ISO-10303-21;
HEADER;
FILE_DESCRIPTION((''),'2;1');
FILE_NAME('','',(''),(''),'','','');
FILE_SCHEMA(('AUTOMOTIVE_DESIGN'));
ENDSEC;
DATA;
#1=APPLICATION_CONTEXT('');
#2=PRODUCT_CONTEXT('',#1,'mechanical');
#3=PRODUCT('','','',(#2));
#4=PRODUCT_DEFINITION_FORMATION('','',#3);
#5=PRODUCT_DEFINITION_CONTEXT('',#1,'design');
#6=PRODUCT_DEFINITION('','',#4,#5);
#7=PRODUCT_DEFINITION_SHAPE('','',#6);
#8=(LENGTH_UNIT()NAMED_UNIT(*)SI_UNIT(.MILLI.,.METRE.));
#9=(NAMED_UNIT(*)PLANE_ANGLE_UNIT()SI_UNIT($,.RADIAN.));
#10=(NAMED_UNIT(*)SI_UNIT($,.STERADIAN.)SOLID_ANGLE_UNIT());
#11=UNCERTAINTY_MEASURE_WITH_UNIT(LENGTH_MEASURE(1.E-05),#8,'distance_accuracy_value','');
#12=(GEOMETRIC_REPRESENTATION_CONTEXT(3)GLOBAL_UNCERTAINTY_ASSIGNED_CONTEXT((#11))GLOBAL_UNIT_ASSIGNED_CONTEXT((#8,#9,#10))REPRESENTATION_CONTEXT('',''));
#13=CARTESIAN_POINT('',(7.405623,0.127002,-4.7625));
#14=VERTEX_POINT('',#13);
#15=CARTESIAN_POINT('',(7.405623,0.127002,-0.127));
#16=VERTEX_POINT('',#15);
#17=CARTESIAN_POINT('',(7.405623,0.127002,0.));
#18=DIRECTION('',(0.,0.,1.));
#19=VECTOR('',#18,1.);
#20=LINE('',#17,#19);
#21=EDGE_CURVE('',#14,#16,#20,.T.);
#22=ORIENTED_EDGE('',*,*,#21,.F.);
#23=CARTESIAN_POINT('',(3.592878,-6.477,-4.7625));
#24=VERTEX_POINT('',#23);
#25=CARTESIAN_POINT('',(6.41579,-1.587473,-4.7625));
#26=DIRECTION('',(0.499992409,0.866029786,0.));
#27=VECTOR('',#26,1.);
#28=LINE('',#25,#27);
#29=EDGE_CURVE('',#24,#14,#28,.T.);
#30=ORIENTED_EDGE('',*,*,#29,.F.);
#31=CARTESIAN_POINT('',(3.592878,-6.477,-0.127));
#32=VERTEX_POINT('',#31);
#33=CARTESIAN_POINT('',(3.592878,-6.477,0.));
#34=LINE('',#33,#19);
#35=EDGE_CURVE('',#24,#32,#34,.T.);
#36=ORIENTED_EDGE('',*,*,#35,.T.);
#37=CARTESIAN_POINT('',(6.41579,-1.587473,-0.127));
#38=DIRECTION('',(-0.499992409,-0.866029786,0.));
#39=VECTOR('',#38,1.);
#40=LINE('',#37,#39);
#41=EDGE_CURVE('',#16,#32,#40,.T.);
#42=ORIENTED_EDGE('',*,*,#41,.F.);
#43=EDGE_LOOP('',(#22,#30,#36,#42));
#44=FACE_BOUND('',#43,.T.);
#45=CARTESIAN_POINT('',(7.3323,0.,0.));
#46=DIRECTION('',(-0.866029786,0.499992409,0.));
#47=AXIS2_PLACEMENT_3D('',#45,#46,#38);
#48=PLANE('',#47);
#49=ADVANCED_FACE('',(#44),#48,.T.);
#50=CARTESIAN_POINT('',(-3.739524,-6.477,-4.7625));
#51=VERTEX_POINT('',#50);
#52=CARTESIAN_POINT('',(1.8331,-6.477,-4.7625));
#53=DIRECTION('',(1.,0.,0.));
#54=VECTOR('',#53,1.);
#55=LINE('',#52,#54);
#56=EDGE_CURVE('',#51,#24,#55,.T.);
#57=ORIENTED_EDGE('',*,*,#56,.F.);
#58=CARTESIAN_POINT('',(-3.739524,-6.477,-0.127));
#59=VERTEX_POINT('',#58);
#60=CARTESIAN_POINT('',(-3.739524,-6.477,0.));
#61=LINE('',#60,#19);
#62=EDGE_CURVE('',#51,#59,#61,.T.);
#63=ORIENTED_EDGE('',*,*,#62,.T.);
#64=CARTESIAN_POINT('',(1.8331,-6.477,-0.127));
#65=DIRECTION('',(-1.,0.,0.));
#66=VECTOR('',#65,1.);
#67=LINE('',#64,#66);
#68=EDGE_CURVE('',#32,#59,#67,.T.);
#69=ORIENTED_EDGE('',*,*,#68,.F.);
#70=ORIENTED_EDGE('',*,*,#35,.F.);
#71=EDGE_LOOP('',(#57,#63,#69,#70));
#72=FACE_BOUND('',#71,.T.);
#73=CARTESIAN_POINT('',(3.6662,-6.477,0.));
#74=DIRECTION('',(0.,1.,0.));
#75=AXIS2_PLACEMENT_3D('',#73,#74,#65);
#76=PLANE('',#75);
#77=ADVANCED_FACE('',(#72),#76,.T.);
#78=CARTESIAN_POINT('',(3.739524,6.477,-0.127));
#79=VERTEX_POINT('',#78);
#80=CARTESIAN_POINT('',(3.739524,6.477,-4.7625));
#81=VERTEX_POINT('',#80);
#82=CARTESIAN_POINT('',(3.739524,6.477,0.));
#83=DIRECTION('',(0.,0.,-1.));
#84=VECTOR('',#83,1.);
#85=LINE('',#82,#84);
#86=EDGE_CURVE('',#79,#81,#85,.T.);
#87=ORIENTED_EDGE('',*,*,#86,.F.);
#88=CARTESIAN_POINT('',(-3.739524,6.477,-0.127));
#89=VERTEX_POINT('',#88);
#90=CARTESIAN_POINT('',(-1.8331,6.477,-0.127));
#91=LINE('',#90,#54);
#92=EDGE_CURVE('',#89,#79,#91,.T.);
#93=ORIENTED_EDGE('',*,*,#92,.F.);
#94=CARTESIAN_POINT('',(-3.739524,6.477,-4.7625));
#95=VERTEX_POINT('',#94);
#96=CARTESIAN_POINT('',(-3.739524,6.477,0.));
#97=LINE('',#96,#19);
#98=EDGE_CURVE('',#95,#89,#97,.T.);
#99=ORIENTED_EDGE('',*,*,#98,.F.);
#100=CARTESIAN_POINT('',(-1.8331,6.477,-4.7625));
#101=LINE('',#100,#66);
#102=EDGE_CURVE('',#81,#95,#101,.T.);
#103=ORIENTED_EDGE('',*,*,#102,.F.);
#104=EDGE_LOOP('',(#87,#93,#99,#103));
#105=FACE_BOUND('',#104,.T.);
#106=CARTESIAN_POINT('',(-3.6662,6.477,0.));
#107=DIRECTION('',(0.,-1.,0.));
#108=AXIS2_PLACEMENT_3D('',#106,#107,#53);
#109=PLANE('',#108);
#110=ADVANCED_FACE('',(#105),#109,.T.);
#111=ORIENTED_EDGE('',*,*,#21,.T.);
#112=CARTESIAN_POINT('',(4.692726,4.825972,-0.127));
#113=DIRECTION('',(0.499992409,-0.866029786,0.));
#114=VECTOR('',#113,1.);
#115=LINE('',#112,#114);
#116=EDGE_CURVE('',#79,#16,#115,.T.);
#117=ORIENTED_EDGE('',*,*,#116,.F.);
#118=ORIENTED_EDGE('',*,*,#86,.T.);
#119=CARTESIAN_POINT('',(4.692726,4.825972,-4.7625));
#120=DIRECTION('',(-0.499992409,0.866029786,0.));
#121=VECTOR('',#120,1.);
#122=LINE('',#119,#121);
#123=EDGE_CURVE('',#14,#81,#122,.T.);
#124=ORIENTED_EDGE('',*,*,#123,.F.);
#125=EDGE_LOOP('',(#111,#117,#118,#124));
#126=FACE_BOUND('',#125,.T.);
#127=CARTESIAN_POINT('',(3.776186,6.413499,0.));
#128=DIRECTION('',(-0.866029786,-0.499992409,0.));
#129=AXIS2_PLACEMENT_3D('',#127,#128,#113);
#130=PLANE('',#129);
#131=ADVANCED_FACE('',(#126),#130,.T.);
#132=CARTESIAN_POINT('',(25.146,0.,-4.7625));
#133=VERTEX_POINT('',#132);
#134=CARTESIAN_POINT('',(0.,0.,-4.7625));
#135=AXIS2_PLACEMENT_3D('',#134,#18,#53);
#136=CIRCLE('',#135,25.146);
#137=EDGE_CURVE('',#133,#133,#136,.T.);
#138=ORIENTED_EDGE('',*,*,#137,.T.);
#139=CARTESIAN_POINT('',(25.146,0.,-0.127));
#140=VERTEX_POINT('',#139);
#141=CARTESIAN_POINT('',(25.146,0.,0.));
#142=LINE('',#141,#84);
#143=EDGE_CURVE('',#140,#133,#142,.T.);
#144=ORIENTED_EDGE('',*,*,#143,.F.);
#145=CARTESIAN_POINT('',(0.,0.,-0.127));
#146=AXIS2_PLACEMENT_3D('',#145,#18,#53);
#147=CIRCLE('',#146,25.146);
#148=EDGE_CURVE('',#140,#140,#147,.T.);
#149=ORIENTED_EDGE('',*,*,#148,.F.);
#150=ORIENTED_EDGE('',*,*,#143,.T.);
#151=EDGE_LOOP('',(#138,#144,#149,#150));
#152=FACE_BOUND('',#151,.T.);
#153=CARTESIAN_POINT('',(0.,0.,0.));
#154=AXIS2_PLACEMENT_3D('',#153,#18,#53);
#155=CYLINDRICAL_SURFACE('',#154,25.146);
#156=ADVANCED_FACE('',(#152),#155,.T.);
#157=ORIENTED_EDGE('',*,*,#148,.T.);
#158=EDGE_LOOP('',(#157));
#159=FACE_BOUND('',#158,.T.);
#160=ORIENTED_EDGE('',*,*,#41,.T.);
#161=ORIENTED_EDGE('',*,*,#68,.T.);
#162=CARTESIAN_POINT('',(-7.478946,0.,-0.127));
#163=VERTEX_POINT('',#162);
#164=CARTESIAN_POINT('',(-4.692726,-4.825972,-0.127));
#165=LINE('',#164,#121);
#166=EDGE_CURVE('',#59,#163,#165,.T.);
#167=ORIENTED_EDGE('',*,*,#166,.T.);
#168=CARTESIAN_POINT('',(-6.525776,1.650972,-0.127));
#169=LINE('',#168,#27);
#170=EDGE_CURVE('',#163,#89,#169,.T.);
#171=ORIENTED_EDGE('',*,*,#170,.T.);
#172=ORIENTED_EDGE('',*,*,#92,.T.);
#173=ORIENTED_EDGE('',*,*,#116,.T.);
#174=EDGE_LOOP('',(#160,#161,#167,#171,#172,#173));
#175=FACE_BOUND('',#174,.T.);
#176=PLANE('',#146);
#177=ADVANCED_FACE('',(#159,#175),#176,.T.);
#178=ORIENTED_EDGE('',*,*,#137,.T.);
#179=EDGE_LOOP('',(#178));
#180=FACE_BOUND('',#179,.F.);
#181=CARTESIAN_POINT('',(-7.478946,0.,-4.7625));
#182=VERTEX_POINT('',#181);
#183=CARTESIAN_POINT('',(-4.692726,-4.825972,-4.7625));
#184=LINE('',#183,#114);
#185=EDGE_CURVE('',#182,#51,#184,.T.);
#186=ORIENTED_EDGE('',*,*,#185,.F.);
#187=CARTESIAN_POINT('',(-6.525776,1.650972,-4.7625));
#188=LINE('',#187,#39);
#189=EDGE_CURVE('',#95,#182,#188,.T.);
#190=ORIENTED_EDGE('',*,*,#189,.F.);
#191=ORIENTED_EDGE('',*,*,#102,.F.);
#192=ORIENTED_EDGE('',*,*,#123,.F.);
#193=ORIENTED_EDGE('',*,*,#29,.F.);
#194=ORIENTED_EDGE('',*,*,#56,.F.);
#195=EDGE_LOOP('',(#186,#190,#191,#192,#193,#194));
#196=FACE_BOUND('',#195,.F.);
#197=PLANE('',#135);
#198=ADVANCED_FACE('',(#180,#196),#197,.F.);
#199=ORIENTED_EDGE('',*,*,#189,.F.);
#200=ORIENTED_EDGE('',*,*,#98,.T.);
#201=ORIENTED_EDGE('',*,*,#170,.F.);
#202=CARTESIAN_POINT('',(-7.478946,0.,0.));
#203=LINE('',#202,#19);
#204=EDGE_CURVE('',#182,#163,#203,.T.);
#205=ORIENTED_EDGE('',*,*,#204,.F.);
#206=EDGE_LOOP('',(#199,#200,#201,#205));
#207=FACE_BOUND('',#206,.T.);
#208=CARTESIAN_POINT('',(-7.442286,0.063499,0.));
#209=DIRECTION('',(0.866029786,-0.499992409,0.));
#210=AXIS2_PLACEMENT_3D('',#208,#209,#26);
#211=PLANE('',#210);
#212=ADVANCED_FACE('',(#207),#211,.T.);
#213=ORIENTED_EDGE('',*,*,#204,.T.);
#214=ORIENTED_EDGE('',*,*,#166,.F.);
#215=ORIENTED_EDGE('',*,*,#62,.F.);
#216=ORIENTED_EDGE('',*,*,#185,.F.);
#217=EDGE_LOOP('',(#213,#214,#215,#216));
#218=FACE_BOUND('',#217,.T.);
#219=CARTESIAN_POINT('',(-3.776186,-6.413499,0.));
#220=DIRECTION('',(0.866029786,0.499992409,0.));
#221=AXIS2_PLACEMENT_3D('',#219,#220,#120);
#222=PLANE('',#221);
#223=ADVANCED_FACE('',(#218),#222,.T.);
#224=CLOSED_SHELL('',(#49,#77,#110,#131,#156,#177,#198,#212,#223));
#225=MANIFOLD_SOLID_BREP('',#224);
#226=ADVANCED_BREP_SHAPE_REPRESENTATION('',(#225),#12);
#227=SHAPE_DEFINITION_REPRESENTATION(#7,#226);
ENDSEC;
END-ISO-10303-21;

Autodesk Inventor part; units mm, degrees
ref_plane "YZ Plane" through (0, 0, 0) normal (1, 0, 0) x (0, 1, 0)
ref_plane "XZ Plane" through (0, 0, 0) normal (0, 1, 0) x (-1, 0, 0)
ref_plane "XY Plane" through (0, 0, 0) normal (0, 0, 1) x (1, 0, 0)
sketch "Sketch1" plane through (0, 0, 0) normal (0, 0, 1) x (1, 0, 0)
  line L0 (3.6662, 6.35) -> (7.3323, 0)
  line L1 (7.3323, 0) -> (3.6662, -6.35)
  line L2 (3.6662, -6.35) -> (-3.6662, -6.35)
  line L3 (-3.6662, -6.35) -> (-7.3323, 0)
  line L4 (-7.3323, 0) -> (-3.6662, 6.35)
  line L5 (-3.6662, 6.35) -> (3.6662, 6.35)
  circle A0 centre (0, 0) radius 25.273
  circle A1 centre (0, 0) radius 7.3323 construction
  dimension "d0" = 12.7
  dimension "d2" = 50.546
  dimension "d3" = 17.9407
extrude "Extrusion1" add sketch "Sketch1" against normal blind 4.7625
thicken "Reduce Outside Diameter" operation add thickness 0.127 both sides no extend neighbours yes toward (-0.9967573, 0.0804666, 0) faces at (25.191, -2.0336, -3.175)
thicken "Thicken2" operation add thickness 0.127 both sides no extend neighbours yes toward (-0.8660254, -0.5, 0) faces at (-4.8882, -4.2333, -1.5875) (-6.1103, 2.1167, -1.5875) (-1.2221, 6.35, -1.5875) (4.8882, 4.2333, -1.5875) (11.0881, 6.012, 0) (1.2221, -6.35, -1.5875)
equation "\"d0\" = hexSize"
equation "\"d2\" = externalDiameter - 2 * printSpacing"
equation "\"d4\" = thickness"
equation "\"d6\" = printSpacing"
equation "\"d7\" = printSpacing"
equation "\"d8\" = printSpacing"
equation "\"d9\" = printSpacing"
equation "\"hexSize\" = 12.7"
equation "\"externalDiameter\" = 50.8"
equation "\"thickness\" = 4.7625"
equation "\"printSpacing\" = 0.127"
properties part number "1_2x2x3_16-hexBearing" material "PC/ABS Plastic"
